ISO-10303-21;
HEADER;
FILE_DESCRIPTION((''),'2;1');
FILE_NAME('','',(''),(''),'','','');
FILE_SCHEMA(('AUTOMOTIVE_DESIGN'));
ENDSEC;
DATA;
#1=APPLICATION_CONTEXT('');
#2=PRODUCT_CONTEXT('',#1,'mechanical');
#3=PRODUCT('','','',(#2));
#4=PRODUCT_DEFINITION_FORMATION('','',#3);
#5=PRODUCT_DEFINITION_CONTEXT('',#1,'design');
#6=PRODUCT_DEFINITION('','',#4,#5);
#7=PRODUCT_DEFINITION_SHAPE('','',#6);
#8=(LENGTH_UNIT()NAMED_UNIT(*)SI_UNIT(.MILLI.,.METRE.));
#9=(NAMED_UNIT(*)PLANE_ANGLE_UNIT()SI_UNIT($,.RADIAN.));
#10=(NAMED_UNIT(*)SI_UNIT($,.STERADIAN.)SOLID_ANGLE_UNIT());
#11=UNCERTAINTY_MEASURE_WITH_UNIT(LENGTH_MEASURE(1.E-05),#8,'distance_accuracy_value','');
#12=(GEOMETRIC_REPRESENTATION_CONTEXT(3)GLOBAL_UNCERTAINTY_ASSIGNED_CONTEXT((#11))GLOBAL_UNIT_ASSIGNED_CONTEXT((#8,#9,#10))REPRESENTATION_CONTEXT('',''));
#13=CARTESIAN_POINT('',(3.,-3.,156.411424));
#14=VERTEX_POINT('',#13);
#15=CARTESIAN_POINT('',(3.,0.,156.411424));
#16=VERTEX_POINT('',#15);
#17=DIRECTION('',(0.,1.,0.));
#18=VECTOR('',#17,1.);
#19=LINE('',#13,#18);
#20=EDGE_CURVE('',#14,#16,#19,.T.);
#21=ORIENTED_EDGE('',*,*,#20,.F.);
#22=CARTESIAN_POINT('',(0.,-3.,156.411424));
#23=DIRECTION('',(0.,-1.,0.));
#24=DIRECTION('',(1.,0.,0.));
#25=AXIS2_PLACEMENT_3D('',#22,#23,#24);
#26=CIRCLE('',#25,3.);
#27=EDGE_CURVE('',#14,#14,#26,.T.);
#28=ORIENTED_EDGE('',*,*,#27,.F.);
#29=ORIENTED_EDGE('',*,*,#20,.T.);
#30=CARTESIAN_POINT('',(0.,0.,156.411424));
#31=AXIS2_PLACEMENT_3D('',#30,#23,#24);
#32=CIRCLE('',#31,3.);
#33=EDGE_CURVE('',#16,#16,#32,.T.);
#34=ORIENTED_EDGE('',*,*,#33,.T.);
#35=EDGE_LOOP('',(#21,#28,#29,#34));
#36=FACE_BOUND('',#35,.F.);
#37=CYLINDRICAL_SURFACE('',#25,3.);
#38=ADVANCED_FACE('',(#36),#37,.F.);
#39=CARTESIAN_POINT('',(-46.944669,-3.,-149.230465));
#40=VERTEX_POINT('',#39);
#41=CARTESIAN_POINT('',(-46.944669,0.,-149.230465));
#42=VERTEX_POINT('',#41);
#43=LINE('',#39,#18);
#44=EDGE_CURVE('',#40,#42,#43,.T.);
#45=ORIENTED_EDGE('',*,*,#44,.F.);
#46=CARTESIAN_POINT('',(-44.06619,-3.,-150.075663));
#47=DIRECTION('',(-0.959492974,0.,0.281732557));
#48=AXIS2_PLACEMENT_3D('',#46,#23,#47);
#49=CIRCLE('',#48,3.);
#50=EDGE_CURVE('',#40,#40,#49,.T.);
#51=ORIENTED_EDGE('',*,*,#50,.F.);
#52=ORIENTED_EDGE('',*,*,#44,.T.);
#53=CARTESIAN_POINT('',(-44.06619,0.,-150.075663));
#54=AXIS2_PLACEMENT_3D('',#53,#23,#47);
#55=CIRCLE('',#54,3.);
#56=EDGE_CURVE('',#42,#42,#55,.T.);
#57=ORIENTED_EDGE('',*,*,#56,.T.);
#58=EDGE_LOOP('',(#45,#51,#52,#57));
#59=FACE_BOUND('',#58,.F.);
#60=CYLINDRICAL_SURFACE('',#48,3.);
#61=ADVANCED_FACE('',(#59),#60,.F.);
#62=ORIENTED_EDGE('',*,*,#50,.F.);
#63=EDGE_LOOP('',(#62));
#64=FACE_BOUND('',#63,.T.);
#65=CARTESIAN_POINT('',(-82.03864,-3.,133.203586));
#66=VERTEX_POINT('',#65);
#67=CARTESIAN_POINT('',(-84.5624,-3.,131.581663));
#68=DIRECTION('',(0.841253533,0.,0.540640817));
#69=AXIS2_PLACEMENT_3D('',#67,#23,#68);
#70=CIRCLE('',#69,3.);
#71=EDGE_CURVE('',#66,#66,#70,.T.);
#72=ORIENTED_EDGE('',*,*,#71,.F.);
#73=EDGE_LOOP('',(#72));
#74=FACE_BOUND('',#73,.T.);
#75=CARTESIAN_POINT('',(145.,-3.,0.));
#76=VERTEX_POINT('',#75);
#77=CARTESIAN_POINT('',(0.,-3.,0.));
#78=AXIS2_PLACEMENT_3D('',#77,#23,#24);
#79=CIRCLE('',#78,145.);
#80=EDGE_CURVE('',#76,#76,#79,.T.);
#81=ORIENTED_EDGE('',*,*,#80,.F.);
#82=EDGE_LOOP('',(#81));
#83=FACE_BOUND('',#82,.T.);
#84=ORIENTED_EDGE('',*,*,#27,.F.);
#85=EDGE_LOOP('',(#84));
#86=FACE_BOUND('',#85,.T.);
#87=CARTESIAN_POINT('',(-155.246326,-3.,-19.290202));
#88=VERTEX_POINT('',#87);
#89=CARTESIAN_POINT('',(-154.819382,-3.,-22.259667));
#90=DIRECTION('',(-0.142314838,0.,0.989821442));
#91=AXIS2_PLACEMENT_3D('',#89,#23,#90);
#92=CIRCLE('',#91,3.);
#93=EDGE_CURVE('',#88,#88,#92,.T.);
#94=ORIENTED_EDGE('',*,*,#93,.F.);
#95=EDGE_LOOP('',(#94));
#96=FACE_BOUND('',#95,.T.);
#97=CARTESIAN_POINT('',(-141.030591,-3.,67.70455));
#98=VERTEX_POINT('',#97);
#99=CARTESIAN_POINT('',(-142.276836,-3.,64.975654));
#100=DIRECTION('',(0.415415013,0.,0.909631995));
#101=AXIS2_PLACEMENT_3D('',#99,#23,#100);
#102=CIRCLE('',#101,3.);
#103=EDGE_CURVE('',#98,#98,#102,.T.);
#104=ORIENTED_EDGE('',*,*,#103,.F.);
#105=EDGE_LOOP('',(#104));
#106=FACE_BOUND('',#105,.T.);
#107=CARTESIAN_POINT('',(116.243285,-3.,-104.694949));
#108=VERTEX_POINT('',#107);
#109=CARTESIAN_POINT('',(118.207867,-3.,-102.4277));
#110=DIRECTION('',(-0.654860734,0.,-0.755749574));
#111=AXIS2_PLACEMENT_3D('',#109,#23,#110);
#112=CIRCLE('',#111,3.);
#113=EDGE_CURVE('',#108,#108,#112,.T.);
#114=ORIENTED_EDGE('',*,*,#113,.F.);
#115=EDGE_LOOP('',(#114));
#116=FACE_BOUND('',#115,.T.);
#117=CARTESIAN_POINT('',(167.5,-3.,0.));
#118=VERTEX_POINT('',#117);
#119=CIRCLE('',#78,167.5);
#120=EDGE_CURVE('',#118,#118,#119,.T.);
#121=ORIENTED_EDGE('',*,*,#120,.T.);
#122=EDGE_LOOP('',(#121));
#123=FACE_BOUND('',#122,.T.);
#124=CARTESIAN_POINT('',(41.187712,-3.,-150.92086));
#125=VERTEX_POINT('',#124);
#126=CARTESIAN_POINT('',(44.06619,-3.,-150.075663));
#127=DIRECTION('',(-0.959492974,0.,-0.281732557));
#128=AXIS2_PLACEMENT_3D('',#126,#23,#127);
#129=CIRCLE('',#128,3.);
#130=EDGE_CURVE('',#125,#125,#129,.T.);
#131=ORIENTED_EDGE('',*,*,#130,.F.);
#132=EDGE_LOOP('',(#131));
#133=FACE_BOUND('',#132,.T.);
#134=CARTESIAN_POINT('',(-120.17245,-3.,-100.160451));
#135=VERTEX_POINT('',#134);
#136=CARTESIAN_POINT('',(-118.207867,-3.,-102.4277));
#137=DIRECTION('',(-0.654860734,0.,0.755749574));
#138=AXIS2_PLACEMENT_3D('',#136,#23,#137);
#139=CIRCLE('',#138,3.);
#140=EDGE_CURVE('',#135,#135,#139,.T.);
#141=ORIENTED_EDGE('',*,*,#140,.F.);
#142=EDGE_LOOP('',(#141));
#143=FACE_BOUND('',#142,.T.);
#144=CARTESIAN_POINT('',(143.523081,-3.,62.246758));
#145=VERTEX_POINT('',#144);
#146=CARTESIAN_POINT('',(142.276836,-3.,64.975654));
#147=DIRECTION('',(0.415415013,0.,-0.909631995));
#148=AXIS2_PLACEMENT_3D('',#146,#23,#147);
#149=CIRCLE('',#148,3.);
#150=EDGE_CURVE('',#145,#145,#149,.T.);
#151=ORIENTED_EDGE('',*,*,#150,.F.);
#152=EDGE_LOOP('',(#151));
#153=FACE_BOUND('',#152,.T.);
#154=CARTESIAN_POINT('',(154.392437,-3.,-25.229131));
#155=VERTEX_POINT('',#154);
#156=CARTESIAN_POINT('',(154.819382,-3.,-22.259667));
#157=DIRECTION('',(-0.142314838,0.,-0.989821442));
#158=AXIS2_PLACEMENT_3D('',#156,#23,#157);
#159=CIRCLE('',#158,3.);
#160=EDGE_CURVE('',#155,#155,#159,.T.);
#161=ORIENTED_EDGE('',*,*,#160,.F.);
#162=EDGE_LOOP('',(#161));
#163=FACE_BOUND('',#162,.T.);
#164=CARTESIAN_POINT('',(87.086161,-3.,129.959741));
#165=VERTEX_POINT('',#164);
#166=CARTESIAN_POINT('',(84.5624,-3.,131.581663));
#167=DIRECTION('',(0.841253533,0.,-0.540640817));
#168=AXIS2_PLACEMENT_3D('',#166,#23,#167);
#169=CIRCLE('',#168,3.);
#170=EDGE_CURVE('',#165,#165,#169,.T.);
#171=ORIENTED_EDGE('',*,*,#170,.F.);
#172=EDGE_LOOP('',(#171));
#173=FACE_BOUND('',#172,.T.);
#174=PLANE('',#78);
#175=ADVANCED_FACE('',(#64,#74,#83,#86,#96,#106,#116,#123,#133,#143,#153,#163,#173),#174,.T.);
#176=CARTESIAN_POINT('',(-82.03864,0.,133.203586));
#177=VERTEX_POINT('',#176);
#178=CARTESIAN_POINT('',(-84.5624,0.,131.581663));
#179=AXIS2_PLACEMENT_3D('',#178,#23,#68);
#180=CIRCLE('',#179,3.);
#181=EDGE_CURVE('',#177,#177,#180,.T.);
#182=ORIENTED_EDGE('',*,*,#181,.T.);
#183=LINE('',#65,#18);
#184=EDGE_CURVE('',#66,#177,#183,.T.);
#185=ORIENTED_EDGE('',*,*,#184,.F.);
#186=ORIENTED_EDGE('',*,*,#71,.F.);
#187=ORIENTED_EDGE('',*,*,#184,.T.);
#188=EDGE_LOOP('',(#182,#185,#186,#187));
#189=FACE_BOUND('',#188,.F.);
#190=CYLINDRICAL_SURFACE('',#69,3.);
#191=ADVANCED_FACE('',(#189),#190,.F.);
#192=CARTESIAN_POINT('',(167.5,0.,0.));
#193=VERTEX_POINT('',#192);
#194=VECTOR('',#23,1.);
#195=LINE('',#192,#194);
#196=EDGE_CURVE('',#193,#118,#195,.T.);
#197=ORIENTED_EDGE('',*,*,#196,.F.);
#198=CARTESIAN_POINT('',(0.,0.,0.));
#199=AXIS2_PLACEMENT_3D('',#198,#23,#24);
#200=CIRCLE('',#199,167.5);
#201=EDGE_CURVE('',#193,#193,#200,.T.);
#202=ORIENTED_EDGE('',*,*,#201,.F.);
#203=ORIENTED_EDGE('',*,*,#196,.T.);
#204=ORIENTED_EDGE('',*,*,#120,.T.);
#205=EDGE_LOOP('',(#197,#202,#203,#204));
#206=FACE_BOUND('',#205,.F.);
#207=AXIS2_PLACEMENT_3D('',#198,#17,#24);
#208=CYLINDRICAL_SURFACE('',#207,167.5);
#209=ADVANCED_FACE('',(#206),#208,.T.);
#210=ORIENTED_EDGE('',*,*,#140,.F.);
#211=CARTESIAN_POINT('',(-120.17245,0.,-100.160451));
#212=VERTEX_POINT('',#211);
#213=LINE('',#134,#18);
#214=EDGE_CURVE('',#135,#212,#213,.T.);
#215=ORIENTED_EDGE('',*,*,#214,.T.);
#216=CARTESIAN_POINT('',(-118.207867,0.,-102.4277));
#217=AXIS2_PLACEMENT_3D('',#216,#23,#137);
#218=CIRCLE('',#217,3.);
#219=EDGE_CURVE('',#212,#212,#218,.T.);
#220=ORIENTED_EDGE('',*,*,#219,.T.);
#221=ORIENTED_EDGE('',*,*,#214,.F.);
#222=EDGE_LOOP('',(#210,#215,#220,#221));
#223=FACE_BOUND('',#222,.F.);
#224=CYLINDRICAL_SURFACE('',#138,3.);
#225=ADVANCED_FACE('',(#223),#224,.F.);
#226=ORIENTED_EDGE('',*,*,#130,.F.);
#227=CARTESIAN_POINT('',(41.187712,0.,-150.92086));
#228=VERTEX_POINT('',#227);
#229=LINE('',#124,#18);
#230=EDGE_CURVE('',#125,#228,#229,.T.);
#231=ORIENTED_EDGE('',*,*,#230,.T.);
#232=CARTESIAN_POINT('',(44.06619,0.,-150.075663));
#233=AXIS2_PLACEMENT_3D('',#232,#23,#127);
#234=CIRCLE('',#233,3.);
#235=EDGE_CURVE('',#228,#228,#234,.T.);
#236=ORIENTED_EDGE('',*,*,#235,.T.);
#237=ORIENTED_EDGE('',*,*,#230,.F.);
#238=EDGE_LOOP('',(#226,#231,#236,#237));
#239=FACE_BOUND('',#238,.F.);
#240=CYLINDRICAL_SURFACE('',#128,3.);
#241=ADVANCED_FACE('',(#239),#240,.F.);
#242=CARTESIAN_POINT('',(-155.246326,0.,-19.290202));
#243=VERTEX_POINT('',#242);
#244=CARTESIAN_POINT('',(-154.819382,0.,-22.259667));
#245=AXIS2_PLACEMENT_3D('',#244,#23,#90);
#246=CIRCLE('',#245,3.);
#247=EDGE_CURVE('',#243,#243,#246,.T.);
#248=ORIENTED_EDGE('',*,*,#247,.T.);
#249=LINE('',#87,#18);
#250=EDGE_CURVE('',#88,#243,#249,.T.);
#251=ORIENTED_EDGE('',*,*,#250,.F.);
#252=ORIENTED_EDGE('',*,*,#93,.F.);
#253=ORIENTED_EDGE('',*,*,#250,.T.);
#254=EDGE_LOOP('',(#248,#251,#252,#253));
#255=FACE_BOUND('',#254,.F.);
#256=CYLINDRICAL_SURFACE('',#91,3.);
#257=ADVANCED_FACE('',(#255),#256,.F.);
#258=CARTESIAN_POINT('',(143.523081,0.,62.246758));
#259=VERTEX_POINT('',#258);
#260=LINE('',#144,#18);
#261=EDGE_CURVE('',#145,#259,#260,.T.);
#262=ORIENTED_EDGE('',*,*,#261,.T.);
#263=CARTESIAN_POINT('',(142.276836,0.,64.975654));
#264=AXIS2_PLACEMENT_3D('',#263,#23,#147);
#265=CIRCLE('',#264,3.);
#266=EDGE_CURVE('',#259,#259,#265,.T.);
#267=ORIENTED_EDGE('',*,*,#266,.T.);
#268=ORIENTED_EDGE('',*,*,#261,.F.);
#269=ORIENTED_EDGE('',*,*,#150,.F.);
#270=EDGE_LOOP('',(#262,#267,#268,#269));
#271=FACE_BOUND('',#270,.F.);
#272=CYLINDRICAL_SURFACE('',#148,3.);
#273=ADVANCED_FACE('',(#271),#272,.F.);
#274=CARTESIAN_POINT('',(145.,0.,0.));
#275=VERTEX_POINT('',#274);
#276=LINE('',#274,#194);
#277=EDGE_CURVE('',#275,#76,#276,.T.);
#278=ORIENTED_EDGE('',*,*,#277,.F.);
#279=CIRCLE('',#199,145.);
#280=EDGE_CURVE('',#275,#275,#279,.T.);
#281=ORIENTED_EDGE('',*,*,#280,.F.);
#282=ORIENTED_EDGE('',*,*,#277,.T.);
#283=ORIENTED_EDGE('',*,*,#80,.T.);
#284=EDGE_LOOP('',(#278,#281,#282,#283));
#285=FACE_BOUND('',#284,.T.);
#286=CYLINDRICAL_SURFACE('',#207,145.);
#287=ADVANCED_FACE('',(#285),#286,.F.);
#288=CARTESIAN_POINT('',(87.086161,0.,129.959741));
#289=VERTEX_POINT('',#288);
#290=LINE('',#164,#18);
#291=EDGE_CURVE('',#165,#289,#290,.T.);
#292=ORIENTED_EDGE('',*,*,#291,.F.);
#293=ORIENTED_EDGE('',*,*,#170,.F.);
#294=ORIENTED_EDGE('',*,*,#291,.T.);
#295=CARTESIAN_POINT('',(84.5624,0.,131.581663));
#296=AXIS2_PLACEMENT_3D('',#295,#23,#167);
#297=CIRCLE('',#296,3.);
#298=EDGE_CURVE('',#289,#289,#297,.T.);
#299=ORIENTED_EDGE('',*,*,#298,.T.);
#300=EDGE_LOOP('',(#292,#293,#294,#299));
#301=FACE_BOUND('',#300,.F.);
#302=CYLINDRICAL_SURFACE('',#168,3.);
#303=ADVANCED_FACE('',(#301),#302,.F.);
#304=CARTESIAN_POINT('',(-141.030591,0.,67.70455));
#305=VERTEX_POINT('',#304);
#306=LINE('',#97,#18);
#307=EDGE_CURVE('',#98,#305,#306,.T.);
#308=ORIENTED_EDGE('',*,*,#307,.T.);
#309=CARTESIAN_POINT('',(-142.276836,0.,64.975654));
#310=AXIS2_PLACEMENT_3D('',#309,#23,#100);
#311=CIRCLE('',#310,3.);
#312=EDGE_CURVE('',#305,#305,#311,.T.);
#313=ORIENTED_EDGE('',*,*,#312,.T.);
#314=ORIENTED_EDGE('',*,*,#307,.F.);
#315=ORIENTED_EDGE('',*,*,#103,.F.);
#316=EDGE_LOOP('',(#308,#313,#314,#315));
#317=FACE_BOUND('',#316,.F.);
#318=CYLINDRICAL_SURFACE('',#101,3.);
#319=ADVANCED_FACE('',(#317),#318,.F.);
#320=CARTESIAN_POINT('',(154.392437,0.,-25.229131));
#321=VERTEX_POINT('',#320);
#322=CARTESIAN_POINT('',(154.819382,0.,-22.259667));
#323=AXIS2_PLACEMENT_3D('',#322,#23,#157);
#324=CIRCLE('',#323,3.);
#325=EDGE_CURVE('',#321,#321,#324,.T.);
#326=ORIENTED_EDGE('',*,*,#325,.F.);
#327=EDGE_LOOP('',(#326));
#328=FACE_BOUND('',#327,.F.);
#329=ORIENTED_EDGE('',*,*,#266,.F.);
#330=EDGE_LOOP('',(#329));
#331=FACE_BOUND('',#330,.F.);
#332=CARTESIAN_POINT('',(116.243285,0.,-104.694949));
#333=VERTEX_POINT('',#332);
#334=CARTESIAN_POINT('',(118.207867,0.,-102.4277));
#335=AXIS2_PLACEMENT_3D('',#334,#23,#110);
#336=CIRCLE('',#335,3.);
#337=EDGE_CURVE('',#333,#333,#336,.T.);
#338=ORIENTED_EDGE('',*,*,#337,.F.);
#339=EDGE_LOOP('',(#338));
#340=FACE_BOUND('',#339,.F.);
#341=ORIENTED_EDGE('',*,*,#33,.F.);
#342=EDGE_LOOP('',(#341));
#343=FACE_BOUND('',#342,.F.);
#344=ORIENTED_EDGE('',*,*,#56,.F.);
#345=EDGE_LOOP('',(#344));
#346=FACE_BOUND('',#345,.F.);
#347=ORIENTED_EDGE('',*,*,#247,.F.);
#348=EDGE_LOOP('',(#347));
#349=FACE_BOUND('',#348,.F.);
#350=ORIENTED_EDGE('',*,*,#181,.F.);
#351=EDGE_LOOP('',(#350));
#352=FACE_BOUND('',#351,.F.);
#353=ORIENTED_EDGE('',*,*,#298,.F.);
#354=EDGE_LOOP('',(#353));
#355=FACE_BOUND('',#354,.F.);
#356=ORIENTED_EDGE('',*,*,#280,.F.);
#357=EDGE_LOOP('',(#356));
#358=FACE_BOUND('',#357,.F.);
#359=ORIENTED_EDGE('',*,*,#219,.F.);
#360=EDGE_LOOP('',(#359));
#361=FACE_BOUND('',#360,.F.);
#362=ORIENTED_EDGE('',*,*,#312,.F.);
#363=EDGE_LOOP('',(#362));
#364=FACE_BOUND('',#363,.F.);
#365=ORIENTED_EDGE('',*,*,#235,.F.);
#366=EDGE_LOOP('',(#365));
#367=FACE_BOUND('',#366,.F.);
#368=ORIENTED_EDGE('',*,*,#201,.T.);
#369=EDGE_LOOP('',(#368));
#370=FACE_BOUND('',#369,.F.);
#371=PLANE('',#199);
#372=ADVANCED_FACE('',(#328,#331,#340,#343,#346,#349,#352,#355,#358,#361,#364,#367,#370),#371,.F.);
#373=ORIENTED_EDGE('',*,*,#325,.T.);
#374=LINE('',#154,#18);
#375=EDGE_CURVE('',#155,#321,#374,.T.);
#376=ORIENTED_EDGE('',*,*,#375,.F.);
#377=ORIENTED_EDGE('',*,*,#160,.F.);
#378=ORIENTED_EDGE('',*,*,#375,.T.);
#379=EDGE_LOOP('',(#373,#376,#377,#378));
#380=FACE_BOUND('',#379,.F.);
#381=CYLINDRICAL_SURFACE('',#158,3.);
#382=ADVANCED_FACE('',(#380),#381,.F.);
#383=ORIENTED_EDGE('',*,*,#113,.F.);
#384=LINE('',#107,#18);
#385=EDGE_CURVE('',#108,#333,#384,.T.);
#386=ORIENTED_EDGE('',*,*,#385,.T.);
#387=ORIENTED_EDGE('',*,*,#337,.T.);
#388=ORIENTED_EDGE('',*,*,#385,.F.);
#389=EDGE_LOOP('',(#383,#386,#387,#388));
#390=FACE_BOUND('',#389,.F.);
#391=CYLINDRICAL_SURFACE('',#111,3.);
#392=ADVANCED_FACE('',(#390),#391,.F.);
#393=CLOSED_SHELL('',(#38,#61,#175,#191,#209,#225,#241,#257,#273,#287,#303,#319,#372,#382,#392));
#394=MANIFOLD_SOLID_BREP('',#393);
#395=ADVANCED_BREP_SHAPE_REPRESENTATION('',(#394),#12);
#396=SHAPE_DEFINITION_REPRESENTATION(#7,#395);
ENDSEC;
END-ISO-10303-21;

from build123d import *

# Parameters (mm, degrees)
F0_R            = 167.5
F0_R_2          = 145
F1_DEPTH        = 3
F2_R            = 3
F3_DEPTH        = 25
F3_COPIES_COUNT = 11


# Not quite as in the source:
# - a pattern or mirror of a feature is missing from the dataset's text; its kind, count and spacing are read off the source's solid


with BuildPart() as f1:
    # F0 (on Front) → F1 (new body)
    with BuildSketch(Plane.XZ):
        Circle(F0_R)
        Circle(F0_R_2, mode=Mode.SUBTRACT)
    extrude(amount=F1_DEPTH)

    # F2 (on face) → F3 (cut)
    with BuildSketch(Plane.XZ.offset(3)):
        with Locations((0, 156.4114242792)):
            Circle(F2_R)
    f3 = extrude(amount=-F3_DEPTH, mode=Mode.SUBTRACT)

    # F3_copies: F3 ×11 about axis
    f3_copies_axis = Axis((0, 0, 0), (0, 1, 0))
    for i in range(1, F3_COPIES_COUNT):
        add(f3.rotate(f3_copies_axis, i * 360 / F3_COPIES_COUNT), mode=Mode.SUBTRACT)


solid = f1.part
